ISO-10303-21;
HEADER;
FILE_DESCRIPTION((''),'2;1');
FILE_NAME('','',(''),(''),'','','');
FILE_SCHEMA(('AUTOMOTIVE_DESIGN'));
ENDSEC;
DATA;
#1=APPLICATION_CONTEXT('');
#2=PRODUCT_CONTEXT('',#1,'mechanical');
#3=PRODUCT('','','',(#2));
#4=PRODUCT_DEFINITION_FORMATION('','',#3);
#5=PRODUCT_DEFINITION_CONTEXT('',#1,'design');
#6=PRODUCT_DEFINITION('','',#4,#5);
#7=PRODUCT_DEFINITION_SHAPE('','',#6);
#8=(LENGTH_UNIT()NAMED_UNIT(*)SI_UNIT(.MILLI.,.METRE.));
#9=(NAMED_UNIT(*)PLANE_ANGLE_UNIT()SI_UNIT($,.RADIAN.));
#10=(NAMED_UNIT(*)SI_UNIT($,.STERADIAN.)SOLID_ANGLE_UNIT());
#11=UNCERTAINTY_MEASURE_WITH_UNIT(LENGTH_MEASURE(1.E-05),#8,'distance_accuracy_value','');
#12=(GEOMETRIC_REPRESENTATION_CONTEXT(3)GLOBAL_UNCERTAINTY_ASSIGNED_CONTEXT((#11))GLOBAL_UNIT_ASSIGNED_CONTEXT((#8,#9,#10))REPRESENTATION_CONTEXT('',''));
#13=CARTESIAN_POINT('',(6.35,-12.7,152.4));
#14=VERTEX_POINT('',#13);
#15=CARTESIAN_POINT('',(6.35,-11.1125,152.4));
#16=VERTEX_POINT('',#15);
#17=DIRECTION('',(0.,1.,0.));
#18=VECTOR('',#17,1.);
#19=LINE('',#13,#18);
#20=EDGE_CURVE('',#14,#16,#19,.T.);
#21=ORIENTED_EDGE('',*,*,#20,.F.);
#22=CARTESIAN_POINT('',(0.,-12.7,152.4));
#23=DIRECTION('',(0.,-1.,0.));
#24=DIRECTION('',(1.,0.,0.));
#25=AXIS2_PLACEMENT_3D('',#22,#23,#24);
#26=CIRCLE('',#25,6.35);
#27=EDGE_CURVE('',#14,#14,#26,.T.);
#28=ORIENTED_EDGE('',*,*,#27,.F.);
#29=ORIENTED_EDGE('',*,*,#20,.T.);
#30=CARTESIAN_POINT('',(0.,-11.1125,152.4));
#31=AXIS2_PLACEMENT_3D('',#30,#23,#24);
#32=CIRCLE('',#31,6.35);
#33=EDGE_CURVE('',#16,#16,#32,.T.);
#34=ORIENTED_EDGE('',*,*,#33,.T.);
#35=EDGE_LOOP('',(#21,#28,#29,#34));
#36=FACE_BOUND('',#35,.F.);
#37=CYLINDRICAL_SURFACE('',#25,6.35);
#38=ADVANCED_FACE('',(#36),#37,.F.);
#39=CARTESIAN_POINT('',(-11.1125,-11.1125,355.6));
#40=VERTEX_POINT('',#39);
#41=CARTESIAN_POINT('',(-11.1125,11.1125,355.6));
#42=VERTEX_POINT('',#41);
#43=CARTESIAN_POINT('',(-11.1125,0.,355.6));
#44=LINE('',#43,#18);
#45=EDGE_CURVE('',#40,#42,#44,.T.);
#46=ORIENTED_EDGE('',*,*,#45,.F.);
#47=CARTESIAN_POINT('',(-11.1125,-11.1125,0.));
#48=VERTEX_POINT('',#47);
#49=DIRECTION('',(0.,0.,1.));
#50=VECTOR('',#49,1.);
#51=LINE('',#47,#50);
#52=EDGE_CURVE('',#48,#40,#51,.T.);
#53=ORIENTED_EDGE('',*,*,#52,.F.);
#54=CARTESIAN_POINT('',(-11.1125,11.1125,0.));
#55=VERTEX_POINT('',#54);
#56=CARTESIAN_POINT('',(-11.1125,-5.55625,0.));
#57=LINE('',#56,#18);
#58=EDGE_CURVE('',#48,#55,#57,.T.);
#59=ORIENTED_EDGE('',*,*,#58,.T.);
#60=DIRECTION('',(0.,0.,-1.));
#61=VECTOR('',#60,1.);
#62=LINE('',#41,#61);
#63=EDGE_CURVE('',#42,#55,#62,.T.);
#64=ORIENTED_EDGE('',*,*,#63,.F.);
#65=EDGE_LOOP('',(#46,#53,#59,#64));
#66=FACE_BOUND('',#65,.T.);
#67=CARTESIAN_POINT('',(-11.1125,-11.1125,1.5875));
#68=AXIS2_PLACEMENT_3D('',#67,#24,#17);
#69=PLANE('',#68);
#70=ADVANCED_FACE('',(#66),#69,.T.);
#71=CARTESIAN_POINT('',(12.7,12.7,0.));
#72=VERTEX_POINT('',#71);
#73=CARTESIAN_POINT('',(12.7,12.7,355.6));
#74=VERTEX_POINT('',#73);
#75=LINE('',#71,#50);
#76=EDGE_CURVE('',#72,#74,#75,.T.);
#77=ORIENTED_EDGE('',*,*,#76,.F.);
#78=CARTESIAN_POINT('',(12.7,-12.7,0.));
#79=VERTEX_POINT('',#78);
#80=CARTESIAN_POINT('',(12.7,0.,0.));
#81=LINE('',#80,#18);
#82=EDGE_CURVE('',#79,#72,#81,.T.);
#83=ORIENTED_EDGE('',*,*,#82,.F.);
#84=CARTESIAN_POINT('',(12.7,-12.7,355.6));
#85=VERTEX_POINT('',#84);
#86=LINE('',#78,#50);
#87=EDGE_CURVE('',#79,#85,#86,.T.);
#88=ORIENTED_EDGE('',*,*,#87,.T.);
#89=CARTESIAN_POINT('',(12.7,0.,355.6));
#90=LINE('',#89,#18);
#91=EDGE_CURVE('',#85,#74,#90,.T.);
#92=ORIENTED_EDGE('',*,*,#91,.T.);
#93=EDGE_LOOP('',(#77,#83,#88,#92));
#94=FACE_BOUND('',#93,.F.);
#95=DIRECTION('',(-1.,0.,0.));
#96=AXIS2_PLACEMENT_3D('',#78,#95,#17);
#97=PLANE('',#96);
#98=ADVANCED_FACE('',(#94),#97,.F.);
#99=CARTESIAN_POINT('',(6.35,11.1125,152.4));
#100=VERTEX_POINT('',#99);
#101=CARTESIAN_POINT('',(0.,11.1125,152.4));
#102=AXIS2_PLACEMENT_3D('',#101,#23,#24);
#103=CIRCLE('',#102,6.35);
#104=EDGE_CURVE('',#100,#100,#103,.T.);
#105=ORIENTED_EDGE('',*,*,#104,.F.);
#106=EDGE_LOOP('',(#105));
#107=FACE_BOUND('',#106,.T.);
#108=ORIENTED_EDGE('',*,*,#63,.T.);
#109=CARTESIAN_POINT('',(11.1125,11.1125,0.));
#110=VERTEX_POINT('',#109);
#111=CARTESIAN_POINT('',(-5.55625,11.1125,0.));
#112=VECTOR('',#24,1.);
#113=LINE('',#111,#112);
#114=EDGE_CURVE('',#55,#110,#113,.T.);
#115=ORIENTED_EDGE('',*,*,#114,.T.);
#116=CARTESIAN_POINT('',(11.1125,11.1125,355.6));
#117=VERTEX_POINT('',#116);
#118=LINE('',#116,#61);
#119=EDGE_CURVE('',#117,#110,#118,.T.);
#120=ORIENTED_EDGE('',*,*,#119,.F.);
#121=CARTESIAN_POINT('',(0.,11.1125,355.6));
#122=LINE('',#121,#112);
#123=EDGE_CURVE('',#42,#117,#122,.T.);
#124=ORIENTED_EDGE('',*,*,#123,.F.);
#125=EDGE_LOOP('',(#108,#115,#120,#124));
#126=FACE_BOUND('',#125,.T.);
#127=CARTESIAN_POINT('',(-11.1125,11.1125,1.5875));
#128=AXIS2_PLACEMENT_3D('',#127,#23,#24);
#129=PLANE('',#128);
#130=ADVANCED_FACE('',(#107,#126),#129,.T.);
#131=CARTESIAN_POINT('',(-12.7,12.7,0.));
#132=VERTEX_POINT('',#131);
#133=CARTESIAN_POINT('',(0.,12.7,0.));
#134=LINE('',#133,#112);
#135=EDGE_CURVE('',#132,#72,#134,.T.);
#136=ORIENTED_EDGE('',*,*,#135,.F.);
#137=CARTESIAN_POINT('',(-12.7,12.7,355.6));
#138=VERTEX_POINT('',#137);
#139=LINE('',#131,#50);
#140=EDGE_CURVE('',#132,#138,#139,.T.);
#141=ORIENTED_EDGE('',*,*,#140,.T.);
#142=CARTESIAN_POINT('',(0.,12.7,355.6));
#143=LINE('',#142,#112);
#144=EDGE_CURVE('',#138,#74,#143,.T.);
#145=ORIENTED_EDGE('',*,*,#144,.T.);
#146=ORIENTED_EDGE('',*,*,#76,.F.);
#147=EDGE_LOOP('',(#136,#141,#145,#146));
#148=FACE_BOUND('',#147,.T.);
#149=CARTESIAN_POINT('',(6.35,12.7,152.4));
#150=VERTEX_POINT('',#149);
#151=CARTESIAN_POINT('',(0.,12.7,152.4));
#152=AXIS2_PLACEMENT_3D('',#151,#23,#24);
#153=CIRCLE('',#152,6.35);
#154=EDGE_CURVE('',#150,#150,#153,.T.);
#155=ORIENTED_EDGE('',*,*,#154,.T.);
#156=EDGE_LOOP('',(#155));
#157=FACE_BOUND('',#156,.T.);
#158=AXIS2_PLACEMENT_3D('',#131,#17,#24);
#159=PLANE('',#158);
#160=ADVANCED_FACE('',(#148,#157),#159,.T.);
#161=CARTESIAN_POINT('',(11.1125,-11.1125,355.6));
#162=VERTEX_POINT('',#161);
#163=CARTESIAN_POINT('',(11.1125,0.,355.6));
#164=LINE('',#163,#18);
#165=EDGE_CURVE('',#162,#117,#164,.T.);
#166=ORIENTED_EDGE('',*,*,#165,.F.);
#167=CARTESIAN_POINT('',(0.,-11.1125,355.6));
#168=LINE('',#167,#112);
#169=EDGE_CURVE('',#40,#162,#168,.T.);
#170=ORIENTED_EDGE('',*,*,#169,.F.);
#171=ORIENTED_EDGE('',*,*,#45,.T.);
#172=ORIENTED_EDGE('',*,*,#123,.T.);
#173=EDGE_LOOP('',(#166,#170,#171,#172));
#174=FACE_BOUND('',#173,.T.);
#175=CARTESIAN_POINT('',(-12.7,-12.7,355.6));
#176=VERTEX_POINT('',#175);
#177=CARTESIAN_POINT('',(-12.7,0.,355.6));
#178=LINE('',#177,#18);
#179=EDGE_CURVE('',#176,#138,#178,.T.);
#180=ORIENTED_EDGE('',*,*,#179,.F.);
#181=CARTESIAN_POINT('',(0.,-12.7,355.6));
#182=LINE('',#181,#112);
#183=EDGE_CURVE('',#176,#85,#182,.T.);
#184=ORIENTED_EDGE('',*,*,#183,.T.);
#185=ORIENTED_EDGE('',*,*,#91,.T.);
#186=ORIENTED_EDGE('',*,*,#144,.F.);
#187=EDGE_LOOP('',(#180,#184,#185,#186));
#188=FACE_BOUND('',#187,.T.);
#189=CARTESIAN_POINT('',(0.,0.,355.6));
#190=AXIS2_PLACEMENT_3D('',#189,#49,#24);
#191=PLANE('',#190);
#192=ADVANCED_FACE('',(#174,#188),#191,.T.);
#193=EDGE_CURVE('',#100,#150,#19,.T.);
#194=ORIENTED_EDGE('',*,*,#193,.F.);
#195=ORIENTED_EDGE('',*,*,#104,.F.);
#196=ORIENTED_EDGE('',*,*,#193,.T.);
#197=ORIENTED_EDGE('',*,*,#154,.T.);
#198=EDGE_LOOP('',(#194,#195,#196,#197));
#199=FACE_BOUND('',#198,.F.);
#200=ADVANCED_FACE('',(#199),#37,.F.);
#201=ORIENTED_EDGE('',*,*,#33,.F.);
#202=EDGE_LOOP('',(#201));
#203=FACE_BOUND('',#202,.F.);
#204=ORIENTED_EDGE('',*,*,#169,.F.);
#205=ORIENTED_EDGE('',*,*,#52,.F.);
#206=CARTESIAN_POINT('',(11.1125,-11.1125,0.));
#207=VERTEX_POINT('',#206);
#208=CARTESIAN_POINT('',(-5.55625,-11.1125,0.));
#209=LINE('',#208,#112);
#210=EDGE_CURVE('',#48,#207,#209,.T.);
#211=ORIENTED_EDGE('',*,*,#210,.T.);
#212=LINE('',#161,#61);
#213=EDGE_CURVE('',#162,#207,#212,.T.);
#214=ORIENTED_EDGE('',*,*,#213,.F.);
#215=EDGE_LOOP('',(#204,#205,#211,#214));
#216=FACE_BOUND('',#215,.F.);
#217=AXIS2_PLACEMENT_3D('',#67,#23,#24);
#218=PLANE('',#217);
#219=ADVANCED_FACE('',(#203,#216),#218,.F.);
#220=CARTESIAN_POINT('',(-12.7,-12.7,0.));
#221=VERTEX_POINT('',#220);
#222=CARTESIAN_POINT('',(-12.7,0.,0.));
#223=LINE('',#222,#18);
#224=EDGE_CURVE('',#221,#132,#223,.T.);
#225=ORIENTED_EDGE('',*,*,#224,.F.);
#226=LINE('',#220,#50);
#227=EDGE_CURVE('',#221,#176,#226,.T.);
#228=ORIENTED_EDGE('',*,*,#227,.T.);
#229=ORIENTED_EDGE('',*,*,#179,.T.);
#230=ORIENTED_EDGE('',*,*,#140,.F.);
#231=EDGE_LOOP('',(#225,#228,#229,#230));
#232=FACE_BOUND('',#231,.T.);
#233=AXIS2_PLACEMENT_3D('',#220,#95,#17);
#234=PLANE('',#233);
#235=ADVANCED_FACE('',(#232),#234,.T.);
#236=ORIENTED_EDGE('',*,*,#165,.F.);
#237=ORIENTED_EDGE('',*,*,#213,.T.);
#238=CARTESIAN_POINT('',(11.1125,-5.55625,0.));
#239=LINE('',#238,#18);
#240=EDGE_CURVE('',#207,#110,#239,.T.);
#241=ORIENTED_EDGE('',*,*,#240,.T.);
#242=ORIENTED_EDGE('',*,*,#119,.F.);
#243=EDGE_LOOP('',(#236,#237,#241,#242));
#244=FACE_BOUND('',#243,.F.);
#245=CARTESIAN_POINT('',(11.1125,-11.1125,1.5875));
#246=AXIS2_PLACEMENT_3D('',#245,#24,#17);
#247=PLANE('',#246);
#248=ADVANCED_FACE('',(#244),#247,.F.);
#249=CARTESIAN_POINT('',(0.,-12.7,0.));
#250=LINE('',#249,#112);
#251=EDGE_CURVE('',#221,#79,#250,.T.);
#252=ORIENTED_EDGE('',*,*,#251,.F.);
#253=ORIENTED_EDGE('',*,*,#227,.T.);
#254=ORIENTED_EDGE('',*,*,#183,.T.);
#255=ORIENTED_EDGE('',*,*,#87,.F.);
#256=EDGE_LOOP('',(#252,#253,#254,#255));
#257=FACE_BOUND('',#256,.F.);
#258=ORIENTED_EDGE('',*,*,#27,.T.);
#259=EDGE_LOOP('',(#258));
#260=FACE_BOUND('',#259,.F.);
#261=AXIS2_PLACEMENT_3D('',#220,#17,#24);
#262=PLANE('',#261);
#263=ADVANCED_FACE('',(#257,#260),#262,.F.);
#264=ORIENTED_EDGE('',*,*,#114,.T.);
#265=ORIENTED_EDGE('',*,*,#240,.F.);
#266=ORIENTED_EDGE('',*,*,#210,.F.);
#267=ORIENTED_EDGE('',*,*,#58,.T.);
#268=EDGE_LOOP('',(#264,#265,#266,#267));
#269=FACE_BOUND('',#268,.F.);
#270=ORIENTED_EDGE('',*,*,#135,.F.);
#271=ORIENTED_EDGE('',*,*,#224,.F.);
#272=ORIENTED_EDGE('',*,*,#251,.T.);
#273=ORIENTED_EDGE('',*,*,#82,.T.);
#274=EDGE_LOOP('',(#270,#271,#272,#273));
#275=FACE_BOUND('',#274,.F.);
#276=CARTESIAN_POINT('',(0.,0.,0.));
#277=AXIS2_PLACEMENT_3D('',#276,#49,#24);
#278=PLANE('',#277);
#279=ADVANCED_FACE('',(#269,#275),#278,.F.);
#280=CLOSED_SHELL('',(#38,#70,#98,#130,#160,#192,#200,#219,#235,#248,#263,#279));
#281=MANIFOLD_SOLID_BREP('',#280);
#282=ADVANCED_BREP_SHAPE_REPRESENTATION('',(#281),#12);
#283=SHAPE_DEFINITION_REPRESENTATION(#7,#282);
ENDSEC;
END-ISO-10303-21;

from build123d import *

# Parameters (mm, degrees)
F1_W     = 25.4
F1_H     = 25.4
F2_DEPTH = 355.6
F3_T     = -1.5875
F4_DEPTH = 1.5885
F5_R     = 6.35
F6_DEPTH = 25.401


# Not quite as in the source:
# - a variable given as a bare number and used for a length is read in inches; the dataset says mm whatever the document's units were


with BuildPart() as f2:
    # F1 (on Top) → F2 (new body)
    with BuildSketch(Plane.XY):
        Rectangle(F1_W, F1_H)
    extrude(amount=F2_DEPTH)

    # F3
    f3_openings = [f2.faces().sort_by_distance(p)[0] for p in [
        (0, 0, 355.6),
    ]]
    offset(amount=F3_T, openings=f3_openings)

    # F4 (cut, through all): a face of the model
    f4_faces = [f2.faces().sort_by_distance(p)[0] for p in [
        (0, 0, 1.5875),
    ]]
    extrude(f4_faces, amount=-F4_DEPTH, mode=Mode.SUBTRACT)

    # F5 (on face) → F6 (cut, through all)
    with BuildSketch(Plane.XZ.offset(12.7)):
        with Locations((0, 152.4)):
            Circle(F5_R)
    extrude(amount=-F6_DEPTH, mode=Mode.SUBTRACT)


solid = f2.part
